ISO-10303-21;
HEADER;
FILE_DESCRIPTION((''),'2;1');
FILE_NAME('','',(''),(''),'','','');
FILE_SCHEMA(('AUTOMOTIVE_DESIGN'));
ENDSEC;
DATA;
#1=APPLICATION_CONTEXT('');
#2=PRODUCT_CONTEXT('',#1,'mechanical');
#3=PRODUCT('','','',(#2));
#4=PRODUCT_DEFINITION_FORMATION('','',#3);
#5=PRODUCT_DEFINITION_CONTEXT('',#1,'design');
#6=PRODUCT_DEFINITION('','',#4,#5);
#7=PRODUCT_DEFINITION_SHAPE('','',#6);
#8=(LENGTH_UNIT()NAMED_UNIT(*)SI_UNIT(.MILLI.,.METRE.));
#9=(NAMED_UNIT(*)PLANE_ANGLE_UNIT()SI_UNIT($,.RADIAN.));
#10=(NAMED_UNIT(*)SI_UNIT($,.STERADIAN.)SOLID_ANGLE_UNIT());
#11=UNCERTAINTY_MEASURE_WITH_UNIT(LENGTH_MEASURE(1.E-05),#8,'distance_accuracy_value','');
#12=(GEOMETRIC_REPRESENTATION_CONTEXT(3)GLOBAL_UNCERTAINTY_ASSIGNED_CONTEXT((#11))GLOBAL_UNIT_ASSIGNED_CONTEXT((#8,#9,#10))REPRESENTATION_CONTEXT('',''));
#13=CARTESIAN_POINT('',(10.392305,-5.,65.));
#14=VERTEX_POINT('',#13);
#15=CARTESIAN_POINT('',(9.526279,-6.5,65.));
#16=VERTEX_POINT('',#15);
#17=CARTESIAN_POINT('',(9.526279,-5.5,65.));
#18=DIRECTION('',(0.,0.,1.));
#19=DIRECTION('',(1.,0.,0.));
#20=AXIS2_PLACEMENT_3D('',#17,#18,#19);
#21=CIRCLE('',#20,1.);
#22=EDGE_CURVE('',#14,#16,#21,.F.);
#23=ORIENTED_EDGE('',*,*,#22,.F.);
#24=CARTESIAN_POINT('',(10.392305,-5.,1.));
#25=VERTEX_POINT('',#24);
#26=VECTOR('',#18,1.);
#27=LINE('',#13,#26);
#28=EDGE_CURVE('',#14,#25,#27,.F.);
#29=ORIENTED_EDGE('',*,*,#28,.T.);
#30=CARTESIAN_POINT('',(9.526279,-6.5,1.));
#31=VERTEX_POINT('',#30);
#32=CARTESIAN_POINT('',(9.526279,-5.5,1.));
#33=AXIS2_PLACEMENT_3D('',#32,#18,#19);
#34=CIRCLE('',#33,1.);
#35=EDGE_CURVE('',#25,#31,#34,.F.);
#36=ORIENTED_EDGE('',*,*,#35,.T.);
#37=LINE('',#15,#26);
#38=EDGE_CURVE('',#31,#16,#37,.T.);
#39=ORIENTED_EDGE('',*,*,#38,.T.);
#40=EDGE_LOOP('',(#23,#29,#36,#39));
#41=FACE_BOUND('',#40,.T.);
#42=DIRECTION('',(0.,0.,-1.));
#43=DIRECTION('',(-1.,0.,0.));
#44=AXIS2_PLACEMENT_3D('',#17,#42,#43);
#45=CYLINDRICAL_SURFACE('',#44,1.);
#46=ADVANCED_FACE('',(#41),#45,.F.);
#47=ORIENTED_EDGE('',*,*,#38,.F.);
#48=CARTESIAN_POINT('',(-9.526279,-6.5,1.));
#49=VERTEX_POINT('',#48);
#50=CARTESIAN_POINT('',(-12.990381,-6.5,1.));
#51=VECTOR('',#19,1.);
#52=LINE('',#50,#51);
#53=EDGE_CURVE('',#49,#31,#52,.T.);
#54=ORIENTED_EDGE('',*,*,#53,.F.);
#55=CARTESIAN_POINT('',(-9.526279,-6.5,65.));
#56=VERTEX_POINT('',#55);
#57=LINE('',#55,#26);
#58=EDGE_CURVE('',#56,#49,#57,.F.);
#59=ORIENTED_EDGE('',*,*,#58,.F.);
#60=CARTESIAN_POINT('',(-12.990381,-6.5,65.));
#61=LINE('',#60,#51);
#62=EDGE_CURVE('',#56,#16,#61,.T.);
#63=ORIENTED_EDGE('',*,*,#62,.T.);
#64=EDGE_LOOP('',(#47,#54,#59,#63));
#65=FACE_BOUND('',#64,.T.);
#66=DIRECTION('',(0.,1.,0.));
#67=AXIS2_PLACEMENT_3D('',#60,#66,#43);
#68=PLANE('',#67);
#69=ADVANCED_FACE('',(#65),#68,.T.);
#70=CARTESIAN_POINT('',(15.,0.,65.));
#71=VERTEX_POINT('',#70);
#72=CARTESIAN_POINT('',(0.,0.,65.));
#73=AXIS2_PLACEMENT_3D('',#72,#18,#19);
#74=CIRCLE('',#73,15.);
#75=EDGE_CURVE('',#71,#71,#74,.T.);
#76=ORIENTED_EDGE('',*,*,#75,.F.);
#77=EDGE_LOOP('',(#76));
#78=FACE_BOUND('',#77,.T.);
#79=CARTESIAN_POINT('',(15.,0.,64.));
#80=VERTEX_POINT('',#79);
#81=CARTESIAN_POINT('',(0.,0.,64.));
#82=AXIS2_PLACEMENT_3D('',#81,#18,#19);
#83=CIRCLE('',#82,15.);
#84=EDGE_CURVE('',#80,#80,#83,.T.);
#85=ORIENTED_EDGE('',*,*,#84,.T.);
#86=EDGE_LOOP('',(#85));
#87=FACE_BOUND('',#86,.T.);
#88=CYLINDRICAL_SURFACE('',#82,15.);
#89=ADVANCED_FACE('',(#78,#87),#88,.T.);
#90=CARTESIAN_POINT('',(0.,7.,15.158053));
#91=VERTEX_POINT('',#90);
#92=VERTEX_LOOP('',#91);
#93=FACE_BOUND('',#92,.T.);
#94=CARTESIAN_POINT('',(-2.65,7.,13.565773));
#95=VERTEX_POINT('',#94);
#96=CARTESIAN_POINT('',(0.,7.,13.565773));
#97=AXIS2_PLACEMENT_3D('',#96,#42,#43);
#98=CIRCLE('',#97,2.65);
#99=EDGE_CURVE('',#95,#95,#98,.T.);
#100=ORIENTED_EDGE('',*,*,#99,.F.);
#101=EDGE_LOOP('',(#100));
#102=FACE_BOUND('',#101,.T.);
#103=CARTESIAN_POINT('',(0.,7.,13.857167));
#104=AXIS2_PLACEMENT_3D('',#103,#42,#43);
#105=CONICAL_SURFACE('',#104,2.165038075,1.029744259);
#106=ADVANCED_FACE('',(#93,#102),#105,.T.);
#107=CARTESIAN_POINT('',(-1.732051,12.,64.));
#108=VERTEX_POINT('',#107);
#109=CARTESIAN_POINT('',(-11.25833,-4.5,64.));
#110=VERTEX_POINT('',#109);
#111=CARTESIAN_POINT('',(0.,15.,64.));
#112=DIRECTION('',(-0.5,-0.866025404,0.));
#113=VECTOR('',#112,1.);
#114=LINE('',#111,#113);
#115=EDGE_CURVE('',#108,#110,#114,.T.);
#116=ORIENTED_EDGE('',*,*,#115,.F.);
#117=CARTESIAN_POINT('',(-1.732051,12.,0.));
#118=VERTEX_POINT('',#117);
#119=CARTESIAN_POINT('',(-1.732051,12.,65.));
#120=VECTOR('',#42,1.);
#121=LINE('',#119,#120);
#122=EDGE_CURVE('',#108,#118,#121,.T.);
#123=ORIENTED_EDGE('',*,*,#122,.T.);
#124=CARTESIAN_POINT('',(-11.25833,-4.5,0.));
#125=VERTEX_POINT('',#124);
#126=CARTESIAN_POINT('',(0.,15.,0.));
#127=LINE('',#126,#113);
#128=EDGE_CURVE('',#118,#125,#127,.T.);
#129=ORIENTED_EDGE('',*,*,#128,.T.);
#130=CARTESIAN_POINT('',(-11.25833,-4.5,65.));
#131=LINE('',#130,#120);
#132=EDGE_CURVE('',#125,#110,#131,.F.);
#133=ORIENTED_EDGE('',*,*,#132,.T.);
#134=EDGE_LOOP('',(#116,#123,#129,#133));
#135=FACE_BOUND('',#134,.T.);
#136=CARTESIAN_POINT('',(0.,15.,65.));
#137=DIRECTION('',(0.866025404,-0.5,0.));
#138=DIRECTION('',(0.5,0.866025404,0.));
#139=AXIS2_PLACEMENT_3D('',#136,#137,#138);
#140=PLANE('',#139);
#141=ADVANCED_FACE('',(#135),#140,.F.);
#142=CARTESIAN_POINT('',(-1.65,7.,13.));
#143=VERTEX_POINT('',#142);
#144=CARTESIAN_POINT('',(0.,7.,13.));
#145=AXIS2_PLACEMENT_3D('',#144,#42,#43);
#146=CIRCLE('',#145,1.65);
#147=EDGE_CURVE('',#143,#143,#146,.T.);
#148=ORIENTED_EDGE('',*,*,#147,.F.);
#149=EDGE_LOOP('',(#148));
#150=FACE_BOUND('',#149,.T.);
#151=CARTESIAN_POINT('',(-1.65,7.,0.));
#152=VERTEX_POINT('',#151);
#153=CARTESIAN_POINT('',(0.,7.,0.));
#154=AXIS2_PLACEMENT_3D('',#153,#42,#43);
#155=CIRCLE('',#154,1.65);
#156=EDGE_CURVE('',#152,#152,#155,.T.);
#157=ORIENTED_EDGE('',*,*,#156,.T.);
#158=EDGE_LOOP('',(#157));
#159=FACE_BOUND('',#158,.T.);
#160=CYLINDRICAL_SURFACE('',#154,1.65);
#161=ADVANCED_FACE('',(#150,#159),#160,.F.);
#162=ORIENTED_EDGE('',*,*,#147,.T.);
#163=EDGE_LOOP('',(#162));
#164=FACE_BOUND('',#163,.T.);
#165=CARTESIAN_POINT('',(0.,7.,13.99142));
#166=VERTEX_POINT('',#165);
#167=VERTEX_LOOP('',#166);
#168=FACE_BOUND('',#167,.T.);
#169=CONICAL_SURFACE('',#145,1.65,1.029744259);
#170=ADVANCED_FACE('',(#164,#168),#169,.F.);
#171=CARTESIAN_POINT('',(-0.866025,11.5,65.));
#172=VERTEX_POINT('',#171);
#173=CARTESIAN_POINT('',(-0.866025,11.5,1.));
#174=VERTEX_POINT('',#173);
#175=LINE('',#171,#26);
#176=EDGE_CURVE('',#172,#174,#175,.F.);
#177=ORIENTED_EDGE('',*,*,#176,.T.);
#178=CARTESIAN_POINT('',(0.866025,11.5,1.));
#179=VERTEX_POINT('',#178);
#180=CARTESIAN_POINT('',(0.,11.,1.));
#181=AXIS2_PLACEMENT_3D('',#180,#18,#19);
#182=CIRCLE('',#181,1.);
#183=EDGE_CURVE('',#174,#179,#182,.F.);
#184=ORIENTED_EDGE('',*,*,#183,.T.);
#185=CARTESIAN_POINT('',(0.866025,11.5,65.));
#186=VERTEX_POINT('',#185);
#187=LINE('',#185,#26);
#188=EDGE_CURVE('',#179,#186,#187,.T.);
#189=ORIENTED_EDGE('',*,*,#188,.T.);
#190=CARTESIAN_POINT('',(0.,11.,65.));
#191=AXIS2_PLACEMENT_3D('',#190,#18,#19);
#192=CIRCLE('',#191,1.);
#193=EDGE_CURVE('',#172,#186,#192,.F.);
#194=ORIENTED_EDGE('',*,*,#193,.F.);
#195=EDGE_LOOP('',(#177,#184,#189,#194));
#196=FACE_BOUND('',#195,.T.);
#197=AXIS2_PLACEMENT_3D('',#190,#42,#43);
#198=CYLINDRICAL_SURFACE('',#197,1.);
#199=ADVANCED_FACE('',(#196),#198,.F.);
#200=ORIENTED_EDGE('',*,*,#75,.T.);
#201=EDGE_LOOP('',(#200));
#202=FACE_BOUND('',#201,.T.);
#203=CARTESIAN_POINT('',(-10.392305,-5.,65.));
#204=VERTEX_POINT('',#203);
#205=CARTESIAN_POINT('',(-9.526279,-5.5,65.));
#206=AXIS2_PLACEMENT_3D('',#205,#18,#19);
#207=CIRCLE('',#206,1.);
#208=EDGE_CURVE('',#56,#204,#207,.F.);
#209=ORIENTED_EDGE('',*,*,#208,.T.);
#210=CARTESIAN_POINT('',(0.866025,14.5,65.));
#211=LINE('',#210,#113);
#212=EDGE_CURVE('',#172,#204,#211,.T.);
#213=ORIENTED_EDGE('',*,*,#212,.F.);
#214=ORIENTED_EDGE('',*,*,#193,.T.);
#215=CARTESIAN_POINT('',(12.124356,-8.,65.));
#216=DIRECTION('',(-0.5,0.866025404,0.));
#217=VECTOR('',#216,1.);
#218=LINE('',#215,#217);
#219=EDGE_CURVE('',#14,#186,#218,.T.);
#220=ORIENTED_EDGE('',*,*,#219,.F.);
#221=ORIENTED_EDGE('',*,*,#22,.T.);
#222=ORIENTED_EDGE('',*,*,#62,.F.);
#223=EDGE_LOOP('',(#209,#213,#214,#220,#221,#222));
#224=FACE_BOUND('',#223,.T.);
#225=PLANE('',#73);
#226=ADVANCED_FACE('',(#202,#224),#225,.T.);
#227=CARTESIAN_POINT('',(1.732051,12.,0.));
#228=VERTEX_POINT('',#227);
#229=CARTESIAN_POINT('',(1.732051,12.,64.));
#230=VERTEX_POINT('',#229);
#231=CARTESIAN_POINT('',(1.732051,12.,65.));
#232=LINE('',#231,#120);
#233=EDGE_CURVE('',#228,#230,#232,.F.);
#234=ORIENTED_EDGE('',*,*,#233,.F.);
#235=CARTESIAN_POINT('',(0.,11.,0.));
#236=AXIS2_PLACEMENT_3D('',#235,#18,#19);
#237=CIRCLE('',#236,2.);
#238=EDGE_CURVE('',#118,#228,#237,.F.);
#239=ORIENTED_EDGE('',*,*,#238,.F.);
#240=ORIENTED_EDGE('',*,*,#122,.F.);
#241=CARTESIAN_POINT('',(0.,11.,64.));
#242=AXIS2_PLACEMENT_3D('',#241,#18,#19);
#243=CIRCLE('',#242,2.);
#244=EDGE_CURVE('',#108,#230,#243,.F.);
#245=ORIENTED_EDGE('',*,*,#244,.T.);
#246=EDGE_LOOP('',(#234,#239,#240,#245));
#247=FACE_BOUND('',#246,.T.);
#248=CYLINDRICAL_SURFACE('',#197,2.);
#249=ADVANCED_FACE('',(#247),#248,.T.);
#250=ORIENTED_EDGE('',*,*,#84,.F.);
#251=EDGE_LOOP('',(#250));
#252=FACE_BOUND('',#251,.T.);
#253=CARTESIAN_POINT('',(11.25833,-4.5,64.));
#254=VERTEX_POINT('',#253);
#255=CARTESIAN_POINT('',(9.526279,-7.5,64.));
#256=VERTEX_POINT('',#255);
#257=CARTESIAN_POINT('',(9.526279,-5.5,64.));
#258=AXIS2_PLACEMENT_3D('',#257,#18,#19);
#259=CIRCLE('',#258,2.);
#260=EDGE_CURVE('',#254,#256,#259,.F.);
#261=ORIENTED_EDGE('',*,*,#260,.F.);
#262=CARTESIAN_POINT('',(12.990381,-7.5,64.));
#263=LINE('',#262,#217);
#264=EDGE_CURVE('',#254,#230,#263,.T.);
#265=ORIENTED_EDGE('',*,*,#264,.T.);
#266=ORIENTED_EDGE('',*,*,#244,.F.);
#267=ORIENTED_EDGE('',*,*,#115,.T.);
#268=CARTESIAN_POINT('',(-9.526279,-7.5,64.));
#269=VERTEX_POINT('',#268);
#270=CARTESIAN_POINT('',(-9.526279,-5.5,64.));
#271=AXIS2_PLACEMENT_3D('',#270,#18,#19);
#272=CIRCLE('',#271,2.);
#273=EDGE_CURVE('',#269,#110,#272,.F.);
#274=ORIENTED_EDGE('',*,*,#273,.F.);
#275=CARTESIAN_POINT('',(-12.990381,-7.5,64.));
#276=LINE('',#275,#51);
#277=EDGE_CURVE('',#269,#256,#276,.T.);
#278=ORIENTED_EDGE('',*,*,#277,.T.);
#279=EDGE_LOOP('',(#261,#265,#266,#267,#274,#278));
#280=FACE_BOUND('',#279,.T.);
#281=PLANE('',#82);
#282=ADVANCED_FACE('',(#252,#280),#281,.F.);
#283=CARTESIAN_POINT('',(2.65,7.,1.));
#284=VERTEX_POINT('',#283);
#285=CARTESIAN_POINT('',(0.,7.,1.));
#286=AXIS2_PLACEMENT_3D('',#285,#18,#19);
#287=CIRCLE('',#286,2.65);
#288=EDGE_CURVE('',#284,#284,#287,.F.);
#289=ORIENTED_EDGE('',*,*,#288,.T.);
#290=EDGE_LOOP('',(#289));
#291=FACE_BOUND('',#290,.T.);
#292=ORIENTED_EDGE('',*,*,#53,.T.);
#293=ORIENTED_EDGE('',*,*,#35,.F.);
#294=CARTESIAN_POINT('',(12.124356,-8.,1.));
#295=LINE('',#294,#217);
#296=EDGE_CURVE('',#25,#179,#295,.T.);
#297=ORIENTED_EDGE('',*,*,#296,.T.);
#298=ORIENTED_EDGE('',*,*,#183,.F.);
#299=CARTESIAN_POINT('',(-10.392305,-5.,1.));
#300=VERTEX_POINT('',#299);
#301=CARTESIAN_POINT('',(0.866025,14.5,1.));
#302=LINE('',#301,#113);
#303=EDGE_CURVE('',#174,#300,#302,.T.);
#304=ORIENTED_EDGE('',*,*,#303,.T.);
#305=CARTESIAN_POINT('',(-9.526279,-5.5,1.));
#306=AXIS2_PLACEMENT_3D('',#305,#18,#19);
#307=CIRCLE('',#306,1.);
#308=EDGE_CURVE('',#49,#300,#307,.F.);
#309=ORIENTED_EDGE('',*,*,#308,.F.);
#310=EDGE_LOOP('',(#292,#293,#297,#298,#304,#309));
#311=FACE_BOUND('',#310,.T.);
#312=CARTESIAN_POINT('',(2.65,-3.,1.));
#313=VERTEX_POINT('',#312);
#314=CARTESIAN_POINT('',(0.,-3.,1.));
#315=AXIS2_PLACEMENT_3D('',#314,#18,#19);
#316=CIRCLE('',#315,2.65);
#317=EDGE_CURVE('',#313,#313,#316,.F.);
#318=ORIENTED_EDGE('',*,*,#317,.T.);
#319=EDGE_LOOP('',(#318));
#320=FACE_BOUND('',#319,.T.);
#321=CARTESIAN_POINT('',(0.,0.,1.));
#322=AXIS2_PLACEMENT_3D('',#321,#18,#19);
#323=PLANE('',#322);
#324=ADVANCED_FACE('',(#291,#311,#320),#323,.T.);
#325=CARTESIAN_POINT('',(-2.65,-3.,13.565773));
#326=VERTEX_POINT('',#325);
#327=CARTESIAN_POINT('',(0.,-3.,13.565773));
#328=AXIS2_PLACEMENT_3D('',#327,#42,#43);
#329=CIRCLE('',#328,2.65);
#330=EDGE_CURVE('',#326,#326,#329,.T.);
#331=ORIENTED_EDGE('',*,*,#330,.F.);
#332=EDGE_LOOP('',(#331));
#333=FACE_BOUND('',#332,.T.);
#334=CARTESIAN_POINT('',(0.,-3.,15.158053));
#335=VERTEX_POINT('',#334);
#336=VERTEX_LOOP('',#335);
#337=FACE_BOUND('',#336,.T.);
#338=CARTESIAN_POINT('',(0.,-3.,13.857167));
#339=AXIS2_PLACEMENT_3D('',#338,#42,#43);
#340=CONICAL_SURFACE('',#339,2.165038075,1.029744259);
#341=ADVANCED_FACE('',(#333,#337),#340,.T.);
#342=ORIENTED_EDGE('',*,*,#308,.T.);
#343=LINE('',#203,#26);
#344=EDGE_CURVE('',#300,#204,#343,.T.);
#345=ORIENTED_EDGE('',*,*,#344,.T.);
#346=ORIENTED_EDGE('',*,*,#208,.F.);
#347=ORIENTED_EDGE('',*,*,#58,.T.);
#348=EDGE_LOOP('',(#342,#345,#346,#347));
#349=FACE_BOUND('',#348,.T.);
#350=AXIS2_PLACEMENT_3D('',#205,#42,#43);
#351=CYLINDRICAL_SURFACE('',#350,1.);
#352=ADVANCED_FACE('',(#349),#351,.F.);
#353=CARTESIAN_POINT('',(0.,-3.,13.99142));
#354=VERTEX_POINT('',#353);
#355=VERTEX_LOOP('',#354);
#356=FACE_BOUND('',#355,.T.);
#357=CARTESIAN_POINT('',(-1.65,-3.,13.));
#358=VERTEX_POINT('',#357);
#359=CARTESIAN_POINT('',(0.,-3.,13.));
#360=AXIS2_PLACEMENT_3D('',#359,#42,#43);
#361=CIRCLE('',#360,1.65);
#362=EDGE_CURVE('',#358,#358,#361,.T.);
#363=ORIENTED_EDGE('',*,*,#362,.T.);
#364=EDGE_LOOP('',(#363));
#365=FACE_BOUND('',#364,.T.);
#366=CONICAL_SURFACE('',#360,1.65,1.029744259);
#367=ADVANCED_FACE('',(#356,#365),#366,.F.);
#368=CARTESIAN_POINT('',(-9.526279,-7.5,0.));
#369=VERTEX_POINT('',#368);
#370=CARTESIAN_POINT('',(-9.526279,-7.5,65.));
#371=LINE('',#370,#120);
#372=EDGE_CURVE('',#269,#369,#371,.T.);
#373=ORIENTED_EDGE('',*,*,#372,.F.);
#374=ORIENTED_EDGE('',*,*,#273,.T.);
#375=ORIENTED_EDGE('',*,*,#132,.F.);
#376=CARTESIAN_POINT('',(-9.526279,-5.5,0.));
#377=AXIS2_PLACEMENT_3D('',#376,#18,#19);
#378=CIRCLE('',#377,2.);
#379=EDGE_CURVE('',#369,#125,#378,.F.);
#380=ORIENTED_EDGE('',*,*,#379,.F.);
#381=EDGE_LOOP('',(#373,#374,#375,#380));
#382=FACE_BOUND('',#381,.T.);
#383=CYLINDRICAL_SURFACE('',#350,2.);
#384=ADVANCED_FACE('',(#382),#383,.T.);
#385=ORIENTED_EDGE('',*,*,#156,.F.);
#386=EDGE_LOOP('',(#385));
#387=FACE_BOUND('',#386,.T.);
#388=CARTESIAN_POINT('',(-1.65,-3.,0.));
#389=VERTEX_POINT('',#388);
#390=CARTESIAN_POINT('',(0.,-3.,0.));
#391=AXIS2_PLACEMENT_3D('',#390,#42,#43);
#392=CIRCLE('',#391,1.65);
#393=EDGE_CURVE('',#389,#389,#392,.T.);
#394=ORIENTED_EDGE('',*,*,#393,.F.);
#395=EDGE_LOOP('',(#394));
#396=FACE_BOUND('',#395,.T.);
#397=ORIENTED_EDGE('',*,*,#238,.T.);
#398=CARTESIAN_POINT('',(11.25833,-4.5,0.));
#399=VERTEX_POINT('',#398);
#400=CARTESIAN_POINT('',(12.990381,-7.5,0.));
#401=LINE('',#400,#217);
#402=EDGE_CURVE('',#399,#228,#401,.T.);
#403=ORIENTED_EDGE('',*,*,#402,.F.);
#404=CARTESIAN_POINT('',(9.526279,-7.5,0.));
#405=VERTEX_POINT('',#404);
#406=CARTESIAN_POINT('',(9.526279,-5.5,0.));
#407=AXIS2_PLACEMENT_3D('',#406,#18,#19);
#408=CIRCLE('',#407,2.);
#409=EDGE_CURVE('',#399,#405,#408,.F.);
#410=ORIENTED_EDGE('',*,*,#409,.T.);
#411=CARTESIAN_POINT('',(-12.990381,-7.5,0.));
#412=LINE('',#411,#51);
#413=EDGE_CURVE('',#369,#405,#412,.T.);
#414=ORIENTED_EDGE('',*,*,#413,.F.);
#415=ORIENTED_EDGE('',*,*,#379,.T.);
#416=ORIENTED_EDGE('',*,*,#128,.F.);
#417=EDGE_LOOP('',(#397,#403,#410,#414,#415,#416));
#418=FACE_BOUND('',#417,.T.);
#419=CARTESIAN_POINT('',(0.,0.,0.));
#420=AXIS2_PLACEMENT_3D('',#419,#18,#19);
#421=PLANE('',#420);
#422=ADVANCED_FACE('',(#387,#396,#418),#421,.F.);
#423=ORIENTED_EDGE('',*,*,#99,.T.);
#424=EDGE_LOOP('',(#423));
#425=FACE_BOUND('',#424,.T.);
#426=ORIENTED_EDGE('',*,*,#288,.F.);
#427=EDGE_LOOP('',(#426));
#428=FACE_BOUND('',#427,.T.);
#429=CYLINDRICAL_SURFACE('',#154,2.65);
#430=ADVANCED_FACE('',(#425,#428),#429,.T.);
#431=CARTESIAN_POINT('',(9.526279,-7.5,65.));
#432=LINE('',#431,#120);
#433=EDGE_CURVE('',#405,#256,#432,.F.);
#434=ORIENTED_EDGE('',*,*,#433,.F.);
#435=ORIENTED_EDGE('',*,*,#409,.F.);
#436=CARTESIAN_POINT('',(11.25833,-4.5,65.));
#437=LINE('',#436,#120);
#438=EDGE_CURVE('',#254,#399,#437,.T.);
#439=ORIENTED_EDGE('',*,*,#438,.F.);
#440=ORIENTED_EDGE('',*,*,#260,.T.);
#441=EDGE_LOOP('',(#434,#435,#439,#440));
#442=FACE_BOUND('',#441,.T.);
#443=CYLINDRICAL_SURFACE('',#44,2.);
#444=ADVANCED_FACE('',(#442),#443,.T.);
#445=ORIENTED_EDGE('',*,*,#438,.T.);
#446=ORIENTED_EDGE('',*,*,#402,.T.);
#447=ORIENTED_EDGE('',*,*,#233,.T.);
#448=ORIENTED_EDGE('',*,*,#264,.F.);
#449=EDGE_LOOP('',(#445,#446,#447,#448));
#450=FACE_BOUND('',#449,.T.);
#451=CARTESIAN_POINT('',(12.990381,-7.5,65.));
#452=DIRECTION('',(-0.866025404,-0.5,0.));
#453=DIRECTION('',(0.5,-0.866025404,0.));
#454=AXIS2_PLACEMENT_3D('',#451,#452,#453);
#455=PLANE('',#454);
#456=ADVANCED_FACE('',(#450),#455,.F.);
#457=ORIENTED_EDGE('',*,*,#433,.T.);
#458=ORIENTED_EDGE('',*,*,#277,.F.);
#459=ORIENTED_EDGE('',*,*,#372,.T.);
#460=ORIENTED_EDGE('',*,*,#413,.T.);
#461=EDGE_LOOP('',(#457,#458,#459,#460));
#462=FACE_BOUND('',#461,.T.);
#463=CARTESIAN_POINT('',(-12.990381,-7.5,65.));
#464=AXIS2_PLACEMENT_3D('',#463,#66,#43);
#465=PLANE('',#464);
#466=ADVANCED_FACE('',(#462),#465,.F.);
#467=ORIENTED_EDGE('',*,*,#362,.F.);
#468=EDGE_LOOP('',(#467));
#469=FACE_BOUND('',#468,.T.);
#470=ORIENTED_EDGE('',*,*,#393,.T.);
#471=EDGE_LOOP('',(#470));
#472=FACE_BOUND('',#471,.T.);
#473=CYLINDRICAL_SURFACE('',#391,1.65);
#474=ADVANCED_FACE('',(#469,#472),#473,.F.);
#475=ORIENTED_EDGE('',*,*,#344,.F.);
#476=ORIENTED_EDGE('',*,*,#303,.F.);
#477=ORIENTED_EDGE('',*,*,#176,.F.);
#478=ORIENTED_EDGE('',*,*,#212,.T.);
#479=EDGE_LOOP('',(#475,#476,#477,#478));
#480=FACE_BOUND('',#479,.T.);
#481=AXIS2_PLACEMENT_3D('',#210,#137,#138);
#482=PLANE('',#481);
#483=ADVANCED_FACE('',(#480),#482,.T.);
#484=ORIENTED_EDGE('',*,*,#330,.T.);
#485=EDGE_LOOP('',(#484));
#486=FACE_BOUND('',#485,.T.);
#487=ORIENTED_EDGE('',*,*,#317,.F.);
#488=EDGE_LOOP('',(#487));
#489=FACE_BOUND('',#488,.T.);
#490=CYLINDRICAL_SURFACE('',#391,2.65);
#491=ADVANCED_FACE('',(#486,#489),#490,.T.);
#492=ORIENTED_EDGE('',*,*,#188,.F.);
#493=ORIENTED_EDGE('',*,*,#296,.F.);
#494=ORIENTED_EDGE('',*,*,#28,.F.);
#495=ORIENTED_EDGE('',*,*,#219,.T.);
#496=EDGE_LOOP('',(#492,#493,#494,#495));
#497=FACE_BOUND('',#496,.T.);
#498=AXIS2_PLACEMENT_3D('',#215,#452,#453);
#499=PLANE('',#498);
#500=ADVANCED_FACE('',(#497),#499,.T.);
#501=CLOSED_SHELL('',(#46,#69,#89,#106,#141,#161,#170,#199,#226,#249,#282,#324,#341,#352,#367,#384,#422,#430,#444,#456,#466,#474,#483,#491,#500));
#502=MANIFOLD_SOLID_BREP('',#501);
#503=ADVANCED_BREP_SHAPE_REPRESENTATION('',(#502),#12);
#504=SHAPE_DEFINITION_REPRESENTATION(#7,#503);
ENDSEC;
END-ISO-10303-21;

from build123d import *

# Parameters (mm, degrees)
BOSS_EXTRUDE1_DEPTH       = 65
FILLET1_R                 = 2
M4X0_7_TAPPED_HOLE1_D     = 3.3
M4X0_7_TAPPED_HOLE1_DEPTH = 13
M4X0_7_TAPPED_HOLE1_TIP   = 0.991420021
SKETCH5_R                 = 15
BOSS_EXTRUDE3_DEPTH       = 1
SHELL2_START              = 1
SHELL2_OUTLINE_R          = 2.65
SHELL2_DEPTH              = 64
SHELL2_START_2            = 15.158053519
SHELL2_2_OUTLINE_R        = 2.65
SHELL2_2_DEPTH            = 49.841946481


with BuildPart() as part:
    # Sketch1 → Boss-Extrude1 (new body)
    with BuildSketch(Plane.XY):
        Polygon((-12.990381057, -7.5), (12.990381057, -7.5), (0, 15), align=None)
    extrude(amount=BOSS_EXTRUDE1_DEPTH)

    # Fillet1
    fillet1_edges = [part.edges().sort_by_distance(p)[0] for p in [
        (-12.990381057, -7.5, 32.5),
        (0, 15, 32.5),
        (12.990381057, -7.5, 32.5),
    ]]
    fillet(fillet1_edges, radius=FILLET1_R)

    # M4x0.7 Tapped Hole1
    with Locations(Plane(origin=(0, 0, 0), x_dir=(-1, 0, 0), z_dir=(0, 0, -1))):
        with Locations((0, -3), (0, 7)):
            Hole(M4X0_7_TAPPED_HOLE1_D / 2, depth=M4X0_7_TAPPED_HOLE1_DEPTH)
            with Locations((0, 0, -(M4X0_7_TAPPED_HOLE1_DEPTH + M4X0_7_TAPPED_HOLE1_TIP / 2))):  # 118° drill point
                Cone(0, M4X0_7_TAPPED_HOLE1_D / 2, M4X0_7_TAPPED_HOLE1_TIP, mode=Mode.SUBTRACT)

    # Sketch5 → Boss-Extrude3 (add)
    with BuildSketch(Plane.XY.offset(65)):
        Circle(SKETCH5_R)
    extrude(amount=-BOSS_EXTRUDE3_DEPTH)

    # Shell2: read off the stored shape, not the designer's step
    # Shell2 outline → Shell2 (cut)
    with BuildSketch(Plane.XY.offset(SHELL2_START)):
        with BuildLine():
            Line((-9.526279442, -6.5), (9.526279442, -6.5))
            ThreePointArc((9.526279442, -6.5), (10.392304845, -6), (10.392304845, -5))
            Line((10.392304845, -5), (0.866025404, 11.5))
            ThreePointArc((0.866025404, 11.5), (0, 12), (-0.866025404, 11.5))
            Line((-0.866025404, 11.5), (-10.392304845, -5))
            ThreePointArc((-10.392304845, -5), (-10.392304845, -6), (-9.526279442, -6.5))
        make_face()
        with Locations((0, -3)):
            Circle(SHELL2_OUTLINE_R, mode=Mode.SUBTRACT)
        with Locations((0, 7)):
            Circle(SHELL2_OUTLINE_R, mode=Mode.SUBTRACT)
    extrude(amount=SHELL2_DEPTH, mode=Mode.SUBTRACT)

    # Shell2 2 outline → Shell2 2 (cut)
    with BuildSketch(Plane.XY.offset(SHELL2_START_2)):
        with Locations((0, 7)):
            Circle(SHELL2_2_OUTLINE_R)
        with Locations((0, -3)):
            Circle(SHELL2_2_OUTLINE_R)
    extrude(amount=SHELL2_2_DEPTH, mode=Mode.SUBTRACT)

    # Shell2 3 outline → Shell2 3 (revolve, cut)
    with BuildSketch(Plane.XZ.offset(-7)):
        Polygon((2.65, 15.158053519), (0, 15.158053519), (2.65, 13.565772778), align=None)
    revolve(axis=Axis((0, 7, 0), (0, 0, 1)), mode=Mode.SUBTRACT)

    # Shell2 4 outline → Shell2 4 (revolve, cut)
    with BuildSketch(Plane.XZ.offset(3)):
        Polygon((2.65, 15.158053519), (0, 15.158053519), (2.65, 13.565772778), align=None)
    revolve(axis=Axis((0, -3, 0), (0, 0, 1)), mode=Mode.SUBTRACT)


solid = part.part
